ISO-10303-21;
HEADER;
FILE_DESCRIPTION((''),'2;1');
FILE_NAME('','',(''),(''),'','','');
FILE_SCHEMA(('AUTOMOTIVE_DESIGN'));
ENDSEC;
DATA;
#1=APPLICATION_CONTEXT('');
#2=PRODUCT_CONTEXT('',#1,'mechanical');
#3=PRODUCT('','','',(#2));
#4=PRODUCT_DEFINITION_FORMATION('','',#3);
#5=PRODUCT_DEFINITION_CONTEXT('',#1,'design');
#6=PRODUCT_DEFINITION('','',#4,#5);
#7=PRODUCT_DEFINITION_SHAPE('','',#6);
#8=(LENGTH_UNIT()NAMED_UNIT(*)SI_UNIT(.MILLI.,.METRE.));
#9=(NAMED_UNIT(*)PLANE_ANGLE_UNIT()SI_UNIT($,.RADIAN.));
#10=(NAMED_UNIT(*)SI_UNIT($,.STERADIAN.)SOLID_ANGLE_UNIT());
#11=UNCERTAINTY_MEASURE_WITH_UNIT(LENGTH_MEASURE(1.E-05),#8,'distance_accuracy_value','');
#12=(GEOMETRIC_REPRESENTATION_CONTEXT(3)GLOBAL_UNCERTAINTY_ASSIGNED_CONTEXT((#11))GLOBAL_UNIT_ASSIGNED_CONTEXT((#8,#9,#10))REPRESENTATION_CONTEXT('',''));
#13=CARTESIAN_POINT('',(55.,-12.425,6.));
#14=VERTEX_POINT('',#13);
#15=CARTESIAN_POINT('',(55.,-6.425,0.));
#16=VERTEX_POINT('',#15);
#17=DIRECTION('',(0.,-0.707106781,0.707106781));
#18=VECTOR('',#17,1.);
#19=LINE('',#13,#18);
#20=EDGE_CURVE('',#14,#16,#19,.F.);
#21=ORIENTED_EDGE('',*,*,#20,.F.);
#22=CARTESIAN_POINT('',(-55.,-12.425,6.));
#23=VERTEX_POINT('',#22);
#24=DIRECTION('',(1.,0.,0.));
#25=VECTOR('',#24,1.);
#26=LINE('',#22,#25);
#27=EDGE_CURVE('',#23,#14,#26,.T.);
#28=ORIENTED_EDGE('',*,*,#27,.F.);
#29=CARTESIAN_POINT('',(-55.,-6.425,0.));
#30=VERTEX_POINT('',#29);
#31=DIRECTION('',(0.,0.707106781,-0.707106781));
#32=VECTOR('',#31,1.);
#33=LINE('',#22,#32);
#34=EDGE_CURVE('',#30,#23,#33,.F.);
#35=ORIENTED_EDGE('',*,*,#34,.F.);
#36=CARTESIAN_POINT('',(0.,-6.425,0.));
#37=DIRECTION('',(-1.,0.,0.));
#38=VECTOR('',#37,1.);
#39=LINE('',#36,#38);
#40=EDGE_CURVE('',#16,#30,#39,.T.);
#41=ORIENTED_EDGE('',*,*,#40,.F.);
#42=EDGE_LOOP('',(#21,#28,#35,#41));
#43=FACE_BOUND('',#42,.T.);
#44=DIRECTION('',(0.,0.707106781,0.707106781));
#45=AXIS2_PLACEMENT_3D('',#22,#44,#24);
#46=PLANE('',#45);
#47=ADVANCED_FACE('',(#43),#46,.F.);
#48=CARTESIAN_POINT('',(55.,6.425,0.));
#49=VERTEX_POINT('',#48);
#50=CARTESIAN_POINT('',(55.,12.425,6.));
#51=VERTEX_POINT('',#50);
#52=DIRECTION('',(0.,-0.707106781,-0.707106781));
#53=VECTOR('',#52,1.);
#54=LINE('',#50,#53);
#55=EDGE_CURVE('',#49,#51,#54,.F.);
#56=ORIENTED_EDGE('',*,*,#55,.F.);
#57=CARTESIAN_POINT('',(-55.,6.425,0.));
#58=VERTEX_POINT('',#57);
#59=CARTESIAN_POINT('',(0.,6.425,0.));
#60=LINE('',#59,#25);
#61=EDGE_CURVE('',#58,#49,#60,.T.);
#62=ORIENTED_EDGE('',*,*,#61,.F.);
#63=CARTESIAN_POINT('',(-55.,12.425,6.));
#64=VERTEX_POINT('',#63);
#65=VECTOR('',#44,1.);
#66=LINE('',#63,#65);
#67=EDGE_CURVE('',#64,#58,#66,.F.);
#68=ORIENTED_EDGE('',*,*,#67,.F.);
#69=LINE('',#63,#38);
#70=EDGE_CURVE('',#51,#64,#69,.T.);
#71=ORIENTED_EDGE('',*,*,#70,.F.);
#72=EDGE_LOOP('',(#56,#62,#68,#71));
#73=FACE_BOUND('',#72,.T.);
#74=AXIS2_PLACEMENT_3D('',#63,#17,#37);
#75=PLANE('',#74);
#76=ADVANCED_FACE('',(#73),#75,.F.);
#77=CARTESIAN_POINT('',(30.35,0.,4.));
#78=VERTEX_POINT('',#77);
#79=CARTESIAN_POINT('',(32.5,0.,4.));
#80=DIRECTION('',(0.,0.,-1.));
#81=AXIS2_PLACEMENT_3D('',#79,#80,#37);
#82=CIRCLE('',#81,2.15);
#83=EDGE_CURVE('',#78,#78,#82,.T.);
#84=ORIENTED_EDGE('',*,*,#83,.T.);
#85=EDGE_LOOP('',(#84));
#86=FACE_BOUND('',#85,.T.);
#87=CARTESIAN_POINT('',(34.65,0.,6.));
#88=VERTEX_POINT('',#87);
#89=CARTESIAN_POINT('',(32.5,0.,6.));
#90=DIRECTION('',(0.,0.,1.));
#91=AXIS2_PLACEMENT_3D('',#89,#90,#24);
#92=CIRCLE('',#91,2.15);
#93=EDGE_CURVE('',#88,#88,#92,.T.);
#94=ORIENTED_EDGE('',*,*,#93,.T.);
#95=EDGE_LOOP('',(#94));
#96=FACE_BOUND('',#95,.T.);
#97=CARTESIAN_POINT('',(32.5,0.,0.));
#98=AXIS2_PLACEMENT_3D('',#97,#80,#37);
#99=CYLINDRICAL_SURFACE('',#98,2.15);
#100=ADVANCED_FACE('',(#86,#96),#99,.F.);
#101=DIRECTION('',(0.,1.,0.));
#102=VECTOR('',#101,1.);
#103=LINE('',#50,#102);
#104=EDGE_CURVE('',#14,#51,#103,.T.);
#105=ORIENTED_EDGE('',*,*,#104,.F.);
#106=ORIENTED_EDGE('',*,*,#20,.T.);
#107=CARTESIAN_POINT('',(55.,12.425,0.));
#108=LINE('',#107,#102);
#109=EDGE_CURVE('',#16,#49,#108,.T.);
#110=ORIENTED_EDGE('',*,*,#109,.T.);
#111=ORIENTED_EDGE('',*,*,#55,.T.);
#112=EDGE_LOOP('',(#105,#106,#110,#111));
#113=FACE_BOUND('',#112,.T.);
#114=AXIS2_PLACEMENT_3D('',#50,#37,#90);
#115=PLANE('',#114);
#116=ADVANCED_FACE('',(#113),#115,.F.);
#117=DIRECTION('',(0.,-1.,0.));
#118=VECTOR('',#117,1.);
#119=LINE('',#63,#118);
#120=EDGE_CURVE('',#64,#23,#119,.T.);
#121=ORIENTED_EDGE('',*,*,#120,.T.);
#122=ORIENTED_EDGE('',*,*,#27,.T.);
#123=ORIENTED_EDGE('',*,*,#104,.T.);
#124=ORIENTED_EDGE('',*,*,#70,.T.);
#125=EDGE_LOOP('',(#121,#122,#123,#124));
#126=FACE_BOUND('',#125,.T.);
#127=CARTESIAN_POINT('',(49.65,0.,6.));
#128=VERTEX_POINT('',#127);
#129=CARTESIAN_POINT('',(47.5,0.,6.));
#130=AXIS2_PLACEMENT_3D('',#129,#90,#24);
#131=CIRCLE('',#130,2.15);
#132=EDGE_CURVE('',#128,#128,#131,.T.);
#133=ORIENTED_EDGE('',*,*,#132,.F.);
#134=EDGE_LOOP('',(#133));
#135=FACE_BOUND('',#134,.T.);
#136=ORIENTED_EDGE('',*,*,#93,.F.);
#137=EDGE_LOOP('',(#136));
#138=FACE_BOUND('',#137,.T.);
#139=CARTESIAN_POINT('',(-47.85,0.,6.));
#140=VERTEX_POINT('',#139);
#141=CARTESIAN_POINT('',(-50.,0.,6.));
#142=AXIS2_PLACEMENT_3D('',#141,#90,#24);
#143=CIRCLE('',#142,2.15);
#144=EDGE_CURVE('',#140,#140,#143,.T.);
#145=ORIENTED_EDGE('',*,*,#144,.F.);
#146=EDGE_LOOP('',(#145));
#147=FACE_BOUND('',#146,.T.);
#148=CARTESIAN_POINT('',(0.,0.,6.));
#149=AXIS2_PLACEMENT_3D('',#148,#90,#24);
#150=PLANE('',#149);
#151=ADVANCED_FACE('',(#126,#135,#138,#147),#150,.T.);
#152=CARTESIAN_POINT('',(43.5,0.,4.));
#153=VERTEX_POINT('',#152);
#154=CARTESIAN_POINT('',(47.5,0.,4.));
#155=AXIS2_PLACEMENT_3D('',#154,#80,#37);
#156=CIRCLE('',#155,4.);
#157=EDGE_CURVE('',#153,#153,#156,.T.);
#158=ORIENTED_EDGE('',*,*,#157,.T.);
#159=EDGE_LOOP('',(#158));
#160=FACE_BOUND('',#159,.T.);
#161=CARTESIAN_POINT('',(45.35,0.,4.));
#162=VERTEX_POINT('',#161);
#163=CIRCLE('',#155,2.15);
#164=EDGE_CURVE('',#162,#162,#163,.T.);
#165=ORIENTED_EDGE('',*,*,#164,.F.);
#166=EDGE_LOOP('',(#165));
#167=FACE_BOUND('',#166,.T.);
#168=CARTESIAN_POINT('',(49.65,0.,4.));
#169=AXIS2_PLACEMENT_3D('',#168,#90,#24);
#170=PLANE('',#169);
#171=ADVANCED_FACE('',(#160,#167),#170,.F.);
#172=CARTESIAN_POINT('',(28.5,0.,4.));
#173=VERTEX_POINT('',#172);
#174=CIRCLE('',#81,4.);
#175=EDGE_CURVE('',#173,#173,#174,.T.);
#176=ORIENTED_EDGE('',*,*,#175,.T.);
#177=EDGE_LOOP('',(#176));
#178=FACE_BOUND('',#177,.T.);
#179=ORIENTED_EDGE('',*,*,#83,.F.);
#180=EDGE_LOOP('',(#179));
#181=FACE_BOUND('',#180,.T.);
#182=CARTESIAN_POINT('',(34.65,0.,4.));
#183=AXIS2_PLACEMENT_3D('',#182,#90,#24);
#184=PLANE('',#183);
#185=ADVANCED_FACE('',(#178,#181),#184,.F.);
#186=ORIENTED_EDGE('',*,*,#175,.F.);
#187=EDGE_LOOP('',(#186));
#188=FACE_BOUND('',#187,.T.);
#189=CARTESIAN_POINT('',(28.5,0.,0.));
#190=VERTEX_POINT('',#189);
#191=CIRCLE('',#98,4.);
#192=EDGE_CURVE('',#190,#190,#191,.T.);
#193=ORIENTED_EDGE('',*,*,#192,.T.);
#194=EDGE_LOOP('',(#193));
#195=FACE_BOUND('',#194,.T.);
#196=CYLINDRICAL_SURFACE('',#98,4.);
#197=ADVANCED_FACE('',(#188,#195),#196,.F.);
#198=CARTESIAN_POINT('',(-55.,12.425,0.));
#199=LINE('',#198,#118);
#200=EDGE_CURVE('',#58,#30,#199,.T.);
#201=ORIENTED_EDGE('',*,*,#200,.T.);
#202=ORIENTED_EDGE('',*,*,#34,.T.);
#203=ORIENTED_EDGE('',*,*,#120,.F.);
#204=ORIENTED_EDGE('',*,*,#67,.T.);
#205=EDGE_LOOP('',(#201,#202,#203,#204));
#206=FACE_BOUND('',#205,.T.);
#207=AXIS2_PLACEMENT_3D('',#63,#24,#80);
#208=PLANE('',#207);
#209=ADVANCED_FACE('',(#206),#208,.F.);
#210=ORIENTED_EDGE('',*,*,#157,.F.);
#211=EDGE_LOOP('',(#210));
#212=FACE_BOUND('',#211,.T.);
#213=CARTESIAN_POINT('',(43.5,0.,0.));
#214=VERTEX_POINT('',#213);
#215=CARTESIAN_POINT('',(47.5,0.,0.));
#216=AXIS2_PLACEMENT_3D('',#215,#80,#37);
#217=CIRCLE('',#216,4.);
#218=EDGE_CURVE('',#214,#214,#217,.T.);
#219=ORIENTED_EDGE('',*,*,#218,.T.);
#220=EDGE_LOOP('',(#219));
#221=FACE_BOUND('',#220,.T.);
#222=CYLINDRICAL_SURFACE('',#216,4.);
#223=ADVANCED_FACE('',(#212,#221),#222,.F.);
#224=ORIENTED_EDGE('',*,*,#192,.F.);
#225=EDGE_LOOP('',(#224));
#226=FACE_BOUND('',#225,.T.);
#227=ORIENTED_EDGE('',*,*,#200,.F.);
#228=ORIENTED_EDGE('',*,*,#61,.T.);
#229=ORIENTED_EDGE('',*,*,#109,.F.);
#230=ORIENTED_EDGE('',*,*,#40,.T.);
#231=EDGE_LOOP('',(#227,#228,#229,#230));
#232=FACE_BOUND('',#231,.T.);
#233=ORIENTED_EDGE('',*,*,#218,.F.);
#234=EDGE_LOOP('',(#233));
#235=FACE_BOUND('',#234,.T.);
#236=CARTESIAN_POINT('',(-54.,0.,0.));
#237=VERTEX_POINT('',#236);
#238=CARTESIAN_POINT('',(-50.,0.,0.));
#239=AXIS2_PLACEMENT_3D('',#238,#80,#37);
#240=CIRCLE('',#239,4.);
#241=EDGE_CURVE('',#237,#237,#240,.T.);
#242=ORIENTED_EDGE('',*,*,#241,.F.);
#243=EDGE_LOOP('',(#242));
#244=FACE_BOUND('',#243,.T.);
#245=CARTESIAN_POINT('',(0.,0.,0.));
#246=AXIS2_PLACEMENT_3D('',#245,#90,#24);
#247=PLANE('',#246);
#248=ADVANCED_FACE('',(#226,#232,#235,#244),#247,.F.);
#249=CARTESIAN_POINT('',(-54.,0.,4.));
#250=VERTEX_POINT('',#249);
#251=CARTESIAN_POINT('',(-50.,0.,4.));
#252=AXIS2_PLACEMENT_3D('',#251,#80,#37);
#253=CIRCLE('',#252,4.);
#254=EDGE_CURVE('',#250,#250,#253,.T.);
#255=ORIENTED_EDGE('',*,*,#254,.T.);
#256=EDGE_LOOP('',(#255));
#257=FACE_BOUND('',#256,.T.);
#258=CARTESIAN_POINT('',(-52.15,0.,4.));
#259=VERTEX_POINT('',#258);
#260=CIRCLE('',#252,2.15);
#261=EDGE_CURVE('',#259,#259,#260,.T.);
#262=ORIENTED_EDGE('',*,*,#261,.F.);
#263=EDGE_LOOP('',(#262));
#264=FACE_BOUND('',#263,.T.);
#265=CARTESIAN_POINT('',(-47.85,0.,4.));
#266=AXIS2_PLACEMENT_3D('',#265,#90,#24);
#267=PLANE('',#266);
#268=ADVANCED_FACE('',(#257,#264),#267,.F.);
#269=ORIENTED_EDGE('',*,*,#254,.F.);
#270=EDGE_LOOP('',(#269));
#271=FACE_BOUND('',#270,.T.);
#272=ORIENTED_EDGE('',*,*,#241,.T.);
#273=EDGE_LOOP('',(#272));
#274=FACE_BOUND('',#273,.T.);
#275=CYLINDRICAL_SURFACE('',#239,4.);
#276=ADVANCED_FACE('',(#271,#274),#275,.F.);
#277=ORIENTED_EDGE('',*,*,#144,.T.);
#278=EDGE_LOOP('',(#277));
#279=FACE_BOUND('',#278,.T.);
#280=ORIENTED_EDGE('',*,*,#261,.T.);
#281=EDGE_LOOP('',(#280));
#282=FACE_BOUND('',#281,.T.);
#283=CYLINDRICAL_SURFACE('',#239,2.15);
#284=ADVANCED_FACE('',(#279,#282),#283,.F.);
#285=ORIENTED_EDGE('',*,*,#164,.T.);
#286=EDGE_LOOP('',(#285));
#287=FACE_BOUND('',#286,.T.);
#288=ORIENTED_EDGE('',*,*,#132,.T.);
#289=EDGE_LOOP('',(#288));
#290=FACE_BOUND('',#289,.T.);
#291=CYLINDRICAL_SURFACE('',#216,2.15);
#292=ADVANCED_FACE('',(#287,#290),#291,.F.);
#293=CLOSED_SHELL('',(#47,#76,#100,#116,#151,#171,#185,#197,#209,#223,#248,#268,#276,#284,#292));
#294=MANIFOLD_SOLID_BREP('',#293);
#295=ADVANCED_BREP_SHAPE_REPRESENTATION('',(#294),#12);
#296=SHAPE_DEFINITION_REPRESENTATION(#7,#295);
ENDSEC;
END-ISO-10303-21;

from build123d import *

# Parameters (mm, degrees)
SKETCH1_W                      = 110
SKETCH1_H                      = 24.85
BOSS_EXTRUDE1_DEPTH            = 6
CHAMFER1_SIZE                  = 6
CBORE_FOR_M4_SHCS1_D           = 4.3
CBORE_FOR_M4_SHCS1_DEPTH       = 10.1
CBORE_FOR_M4_SHCS1_CBORE_D     = 8
CBORE_FOR_M4_SHCS1_CBORE_DEPTH = 4
CBORE_FOR_M4_SHCS1_TIP         = 1.291850331


with BuildPart() as part:
    # Sketch1 → Boss-Extrude1 (new body)
    with BuildSketch(Plane.XY):
        Rectangle(SKETCH1_W, SKETCH1_H)
    extrude(amount=BOSS_EXTRUDE1_DEPTH)

    # Chamfer1
    chamfer1_edges = [part.edges().sort_by_distance(p)[0] for p in [
        (0, -12.425, 0),
        (0, 12.425, 0),
    ]]
    chamfer(chamfer1_edges, length=CHAMFER1_SIZE - 0.0001)  # a hair under: the kernel refuses the full size

    # CBORE for M4 SHCS1
    with Locations(Plane(origin=(0, 0, 0), x_dir=(-1, 0, 0), z_dir=(0, 0, -1))):
        with Locations((-47.5, 0), (-32.5, 0), (50, 0)):
            CounterBoreHole(CBORE_FOR_M4_SHCS1_D / 2, CBORE_FOR_M4_SHCS1_CBORE_D / 2, CBORE_FOR_M4_SHCS1_CBORE_DEPTH, depth=CBORE_FOR_M4_SHCS1_DEPTH)
            with Locations((0, 0, -(CBORE_FOR_M4_SHCS1_DEPTH + CBORE_FOR_M4_SHCS1_TIP / 2))):  # 118° drill point
                Cone(0, CBORE_FOR_M4_SHCS1_D / 2, CBORE_FOR_M4_SHCS1_TIP, mode=Mode.SUBTRACT)


solid = part.part
